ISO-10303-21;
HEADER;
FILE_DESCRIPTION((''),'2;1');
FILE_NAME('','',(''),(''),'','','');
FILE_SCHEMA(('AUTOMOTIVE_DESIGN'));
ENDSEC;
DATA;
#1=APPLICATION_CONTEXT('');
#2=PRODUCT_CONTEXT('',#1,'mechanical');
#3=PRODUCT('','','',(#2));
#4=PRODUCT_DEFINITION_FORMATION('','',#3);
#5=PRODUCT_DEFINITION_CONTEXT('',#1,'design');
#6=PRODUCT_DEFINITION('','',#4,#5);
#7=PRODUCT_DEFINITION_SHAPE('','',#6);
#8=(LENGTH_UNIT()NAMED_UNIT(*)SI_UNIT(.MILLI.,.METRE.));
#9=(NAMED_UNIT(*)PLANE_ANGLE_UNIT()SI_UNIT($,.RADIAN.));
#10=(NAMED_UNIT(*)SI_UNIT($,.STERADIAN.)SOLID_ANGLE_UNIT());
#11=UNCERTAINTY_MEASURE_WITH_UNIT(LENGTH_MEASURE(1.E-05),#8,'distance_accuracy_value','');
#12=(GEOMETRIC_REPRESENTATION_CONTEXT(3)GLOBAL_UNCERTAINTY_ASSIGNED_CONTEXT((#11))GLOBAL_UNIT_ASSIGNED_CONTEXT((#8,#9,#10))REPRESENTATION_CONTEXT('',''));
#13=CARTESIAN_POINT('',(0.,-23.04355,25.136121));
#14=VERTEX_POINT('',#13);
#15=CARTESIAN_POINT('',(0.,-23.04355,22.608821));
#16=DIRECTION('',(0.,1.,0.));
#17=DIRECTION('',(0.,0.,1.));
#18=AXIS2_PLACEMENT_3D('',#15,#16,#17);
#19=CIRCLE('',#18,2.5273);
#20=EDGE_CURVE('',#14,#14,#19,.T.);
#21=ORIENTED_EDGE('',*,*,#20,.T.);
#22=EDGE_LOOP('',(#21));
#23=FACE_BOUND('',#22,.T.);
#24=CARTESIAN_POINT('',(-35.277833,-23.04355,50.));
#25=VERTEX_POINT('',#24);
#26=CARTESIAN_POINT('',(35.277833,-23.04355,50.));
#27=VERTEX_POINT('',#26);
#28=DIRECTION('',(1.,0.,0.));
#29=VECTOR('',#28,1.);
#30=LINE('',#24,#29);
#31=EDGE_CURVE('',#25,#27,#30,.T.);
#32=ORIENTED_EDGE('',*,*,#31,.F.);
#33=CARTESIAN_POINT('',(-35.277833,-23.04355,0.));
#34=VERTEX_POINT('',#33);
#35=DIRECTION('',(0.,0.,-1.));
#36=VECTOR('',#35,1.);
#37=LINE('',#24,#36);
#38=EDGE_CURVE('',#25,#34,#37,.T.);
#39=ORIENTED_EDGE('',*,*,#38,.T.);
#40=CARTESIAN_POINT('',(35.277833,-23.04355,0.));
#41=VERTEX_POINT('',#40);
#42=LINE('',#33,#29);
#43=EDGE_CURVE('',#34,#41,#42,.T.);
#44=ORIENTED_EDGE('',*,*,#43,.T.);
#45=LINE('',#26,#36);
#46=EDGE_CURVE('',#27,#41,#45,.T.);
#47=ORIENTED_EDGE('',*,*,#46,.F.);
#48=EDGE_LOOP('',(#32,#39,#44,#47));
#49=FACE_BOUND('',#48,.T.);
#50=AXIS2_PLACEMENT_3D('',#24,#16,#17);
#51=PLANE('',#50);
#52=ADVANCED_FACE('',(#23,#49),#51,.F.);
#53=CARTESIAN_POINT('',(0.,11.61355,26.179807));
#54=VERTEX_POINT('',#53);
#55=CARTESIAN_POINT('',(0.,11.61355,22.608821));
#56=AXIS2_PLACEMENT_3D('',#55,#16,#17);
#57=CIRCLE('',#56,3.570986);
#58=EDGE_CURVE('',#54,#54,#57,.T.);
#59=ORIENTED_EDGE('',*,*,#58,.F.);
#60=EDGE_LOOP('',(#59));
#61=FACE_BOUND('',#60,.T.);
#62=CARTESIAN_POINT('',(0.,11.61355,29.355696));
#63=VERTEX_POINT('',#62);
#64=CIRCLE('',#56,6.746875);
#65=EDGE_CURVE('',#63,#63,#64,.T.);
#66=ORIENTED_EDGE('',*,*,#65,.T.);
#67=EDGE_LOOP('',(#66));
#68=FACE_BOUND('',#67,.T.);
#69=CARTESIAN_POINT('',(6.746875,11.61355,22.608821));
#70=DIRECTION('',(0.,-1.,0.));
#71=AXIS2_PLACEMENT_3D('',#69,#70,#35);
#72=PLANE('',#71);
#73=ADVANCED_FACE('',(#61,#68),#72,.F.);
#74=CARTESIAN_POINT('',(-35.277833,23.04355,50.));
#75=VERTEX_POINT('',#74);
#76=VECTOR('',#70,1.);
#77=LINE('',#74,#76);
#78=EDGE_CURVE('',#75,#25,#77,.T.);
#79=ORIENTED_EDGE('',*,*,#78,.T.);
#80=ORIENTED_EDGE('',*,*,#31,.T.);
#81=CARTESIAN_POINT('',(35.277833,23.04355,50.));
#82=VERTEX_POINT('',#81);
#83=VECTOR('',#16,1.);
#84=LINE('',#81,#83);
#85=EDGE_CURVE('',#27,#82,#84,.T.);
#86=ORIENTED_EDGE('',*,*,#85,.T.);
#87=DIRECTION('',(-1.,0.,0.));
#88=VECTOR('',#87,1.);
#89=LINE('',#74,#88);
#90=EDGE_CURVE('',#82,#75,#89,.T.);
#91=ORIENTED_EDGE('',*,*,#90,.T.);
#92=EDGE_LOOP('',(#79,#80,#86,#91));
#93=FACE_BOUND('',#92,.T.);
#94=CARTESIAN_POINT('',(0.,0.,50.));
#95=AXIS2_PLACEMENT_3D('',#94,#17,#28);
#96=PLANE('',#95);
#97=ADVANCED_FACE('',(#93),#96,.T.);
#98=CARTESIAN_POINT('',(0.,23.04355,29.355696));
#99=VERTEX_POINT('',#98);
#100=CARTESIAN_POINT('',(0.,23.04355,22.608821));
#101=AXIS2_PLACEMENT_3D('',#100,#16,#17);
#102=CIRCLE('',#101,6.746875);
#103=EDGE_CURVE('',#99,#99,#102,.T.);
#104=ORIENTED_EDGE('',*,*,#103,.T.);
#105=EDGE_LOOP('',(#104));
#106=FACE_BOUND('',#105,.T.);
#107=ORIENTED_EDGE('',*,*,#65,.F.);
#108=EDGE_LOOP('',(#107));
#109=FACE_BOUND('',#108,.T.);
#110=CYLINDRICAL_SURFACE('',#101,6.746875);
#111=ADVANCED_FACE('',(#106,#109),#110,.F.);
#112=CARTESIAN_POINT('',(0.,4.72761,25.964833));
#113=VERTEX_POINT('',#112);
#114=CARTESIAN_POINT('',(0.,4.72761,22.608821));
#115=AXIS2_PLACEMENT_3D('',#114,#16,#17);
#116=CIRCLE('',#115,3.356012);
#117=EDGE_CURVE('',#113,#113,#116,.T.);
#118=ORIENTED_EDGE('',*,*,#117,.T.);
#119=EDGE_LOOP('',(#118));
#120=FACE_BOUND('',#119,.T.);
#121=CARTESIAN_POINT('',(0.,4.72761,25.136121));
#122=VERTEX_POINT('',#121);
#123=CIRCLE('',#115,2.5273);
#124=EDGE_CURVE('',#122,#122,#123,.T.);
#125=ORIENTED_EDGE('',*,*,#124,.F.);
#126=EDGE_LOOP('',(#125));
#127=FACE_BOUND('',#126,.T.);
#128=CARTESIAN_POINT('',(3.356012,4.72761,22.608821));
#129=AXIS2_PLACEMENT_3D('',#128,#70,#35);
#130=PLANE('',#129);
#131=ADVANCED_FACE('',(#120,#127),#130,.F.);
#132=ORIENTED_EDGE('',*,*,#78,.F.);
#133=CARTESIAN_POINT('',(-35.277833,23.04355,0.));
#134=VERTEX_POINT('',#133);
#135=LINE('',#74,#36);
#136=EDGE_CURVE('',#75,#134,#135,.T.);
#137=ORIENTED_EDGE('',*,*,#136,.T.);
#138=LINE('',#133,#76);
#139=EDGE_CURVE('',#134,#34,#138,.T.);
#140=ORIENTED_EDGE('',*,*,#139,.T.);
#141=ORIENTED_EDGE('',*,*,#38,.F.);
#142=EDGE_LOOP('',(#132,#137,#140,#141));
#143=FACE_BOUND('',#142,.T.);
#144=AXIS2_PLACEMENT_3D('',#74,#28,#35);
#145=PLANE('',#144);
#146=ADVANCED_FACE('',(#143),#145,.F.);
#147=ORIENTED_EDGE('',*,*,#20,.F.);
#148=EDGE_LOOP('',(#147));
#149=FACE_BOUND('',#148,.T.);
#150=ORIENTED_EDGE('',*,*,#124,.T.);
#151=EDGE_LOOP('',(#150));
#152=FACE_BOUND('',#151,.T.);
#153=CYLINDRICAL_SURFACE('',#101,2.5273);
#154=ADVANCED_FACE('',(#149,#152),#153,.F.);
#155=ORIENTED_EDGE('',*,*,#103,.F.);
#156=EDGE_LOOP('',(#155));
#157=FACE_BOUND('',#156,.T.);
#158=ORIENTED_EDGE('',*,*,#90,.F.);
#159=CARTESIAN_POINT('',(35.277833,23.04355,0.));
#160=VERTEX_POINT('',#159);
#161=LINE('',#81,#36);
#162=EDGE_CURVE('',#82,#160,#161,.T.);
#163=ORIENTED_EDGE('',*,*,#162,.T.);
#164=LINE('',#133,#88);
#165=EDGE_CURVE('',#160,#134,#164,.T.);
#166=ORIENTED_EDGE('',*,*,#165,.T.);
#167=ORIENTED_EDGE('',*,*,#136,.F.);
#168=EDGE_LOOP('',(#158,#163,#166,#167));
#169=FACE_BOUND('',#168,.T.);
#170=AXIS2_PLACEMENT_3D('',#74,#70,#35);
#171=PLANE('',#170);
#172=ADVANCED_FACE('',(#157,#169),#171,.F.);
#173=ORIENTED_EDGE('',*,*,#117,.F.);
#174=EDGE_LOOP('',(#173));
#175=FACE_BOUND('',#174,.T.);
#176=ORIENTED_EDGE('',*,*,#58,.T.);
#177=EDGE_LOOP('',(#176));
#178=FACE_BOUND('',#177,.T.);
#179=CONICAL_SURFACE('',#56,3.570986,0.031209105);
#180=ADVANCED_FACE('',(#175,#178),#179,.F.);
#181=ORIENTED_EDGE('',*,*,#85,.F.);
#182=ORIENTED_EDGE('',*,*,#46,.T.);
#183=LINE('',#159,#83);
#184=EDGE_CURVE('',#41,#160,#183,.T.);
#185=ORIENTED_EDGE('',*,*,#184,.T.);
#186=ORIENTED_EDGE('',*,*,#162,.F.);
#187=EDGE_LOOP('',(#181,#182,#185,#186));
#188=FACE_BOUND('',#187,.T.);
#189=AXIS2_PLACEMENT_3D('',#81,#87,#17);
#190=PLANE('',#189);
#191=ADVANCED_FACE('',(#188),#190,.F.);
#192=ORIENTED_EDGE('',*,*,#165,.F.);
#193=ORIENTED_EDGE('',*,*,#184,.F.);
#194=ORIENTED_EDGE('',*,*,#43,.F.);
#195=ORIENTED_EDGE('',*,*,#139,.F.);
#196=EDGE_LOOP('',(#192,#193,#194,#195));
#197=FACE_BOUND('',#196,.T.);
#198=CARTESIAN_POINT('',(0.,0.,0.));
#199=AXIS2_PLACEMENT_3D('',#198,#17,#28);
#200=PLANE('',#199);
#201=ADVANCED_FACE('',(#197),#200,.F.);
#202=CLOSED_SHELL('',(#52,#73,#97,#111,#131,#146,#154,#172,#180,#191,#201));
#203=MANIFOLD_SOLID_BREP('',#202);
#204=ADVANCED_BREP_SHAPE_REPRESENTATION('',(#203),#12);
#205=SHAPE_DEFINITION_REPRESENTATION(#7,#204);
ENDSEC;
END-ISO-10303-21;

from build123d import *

# Parameters (mm, degrees)
SKETCH4_W           = 70.55566623
SKETCH4_H           = 46.087100556
BOSS_EXTRUDE1_DEPTH = 50


# Read off the part's stored shape, not the designer's step: AdvancedHole2
with BuildPart() as part:
    # Sketch4 → Boss-Extrude1 (new body)
    with BuildSketch(Plane.XY):
        Rectangle(SKETCH4_W, SKETCH4_H)
    extrude(amount=BOSS_EXTRUDE1_DEPTH)

    # AdvancedHole2 outline → AdvancedHole2 (revolve, cut)
    with BuildSketch(Plane.XY.offset(22.608820769)):
        Polygon((3.570986, 11.613550278), (6.746875, 11.613550278), (6.746875, 23.043550278), (0, 23.043550278), (0, -23.043550278), (2.5273, -23.043550278), (2.5273, 4.727610278), (3.356012175, 4.727610278), align=None)
    revolve(axis=Axis((0, 0, 22.608820769), (0, 1, 0)), mode=Mode.SUBTRACT)


solid = part.part
